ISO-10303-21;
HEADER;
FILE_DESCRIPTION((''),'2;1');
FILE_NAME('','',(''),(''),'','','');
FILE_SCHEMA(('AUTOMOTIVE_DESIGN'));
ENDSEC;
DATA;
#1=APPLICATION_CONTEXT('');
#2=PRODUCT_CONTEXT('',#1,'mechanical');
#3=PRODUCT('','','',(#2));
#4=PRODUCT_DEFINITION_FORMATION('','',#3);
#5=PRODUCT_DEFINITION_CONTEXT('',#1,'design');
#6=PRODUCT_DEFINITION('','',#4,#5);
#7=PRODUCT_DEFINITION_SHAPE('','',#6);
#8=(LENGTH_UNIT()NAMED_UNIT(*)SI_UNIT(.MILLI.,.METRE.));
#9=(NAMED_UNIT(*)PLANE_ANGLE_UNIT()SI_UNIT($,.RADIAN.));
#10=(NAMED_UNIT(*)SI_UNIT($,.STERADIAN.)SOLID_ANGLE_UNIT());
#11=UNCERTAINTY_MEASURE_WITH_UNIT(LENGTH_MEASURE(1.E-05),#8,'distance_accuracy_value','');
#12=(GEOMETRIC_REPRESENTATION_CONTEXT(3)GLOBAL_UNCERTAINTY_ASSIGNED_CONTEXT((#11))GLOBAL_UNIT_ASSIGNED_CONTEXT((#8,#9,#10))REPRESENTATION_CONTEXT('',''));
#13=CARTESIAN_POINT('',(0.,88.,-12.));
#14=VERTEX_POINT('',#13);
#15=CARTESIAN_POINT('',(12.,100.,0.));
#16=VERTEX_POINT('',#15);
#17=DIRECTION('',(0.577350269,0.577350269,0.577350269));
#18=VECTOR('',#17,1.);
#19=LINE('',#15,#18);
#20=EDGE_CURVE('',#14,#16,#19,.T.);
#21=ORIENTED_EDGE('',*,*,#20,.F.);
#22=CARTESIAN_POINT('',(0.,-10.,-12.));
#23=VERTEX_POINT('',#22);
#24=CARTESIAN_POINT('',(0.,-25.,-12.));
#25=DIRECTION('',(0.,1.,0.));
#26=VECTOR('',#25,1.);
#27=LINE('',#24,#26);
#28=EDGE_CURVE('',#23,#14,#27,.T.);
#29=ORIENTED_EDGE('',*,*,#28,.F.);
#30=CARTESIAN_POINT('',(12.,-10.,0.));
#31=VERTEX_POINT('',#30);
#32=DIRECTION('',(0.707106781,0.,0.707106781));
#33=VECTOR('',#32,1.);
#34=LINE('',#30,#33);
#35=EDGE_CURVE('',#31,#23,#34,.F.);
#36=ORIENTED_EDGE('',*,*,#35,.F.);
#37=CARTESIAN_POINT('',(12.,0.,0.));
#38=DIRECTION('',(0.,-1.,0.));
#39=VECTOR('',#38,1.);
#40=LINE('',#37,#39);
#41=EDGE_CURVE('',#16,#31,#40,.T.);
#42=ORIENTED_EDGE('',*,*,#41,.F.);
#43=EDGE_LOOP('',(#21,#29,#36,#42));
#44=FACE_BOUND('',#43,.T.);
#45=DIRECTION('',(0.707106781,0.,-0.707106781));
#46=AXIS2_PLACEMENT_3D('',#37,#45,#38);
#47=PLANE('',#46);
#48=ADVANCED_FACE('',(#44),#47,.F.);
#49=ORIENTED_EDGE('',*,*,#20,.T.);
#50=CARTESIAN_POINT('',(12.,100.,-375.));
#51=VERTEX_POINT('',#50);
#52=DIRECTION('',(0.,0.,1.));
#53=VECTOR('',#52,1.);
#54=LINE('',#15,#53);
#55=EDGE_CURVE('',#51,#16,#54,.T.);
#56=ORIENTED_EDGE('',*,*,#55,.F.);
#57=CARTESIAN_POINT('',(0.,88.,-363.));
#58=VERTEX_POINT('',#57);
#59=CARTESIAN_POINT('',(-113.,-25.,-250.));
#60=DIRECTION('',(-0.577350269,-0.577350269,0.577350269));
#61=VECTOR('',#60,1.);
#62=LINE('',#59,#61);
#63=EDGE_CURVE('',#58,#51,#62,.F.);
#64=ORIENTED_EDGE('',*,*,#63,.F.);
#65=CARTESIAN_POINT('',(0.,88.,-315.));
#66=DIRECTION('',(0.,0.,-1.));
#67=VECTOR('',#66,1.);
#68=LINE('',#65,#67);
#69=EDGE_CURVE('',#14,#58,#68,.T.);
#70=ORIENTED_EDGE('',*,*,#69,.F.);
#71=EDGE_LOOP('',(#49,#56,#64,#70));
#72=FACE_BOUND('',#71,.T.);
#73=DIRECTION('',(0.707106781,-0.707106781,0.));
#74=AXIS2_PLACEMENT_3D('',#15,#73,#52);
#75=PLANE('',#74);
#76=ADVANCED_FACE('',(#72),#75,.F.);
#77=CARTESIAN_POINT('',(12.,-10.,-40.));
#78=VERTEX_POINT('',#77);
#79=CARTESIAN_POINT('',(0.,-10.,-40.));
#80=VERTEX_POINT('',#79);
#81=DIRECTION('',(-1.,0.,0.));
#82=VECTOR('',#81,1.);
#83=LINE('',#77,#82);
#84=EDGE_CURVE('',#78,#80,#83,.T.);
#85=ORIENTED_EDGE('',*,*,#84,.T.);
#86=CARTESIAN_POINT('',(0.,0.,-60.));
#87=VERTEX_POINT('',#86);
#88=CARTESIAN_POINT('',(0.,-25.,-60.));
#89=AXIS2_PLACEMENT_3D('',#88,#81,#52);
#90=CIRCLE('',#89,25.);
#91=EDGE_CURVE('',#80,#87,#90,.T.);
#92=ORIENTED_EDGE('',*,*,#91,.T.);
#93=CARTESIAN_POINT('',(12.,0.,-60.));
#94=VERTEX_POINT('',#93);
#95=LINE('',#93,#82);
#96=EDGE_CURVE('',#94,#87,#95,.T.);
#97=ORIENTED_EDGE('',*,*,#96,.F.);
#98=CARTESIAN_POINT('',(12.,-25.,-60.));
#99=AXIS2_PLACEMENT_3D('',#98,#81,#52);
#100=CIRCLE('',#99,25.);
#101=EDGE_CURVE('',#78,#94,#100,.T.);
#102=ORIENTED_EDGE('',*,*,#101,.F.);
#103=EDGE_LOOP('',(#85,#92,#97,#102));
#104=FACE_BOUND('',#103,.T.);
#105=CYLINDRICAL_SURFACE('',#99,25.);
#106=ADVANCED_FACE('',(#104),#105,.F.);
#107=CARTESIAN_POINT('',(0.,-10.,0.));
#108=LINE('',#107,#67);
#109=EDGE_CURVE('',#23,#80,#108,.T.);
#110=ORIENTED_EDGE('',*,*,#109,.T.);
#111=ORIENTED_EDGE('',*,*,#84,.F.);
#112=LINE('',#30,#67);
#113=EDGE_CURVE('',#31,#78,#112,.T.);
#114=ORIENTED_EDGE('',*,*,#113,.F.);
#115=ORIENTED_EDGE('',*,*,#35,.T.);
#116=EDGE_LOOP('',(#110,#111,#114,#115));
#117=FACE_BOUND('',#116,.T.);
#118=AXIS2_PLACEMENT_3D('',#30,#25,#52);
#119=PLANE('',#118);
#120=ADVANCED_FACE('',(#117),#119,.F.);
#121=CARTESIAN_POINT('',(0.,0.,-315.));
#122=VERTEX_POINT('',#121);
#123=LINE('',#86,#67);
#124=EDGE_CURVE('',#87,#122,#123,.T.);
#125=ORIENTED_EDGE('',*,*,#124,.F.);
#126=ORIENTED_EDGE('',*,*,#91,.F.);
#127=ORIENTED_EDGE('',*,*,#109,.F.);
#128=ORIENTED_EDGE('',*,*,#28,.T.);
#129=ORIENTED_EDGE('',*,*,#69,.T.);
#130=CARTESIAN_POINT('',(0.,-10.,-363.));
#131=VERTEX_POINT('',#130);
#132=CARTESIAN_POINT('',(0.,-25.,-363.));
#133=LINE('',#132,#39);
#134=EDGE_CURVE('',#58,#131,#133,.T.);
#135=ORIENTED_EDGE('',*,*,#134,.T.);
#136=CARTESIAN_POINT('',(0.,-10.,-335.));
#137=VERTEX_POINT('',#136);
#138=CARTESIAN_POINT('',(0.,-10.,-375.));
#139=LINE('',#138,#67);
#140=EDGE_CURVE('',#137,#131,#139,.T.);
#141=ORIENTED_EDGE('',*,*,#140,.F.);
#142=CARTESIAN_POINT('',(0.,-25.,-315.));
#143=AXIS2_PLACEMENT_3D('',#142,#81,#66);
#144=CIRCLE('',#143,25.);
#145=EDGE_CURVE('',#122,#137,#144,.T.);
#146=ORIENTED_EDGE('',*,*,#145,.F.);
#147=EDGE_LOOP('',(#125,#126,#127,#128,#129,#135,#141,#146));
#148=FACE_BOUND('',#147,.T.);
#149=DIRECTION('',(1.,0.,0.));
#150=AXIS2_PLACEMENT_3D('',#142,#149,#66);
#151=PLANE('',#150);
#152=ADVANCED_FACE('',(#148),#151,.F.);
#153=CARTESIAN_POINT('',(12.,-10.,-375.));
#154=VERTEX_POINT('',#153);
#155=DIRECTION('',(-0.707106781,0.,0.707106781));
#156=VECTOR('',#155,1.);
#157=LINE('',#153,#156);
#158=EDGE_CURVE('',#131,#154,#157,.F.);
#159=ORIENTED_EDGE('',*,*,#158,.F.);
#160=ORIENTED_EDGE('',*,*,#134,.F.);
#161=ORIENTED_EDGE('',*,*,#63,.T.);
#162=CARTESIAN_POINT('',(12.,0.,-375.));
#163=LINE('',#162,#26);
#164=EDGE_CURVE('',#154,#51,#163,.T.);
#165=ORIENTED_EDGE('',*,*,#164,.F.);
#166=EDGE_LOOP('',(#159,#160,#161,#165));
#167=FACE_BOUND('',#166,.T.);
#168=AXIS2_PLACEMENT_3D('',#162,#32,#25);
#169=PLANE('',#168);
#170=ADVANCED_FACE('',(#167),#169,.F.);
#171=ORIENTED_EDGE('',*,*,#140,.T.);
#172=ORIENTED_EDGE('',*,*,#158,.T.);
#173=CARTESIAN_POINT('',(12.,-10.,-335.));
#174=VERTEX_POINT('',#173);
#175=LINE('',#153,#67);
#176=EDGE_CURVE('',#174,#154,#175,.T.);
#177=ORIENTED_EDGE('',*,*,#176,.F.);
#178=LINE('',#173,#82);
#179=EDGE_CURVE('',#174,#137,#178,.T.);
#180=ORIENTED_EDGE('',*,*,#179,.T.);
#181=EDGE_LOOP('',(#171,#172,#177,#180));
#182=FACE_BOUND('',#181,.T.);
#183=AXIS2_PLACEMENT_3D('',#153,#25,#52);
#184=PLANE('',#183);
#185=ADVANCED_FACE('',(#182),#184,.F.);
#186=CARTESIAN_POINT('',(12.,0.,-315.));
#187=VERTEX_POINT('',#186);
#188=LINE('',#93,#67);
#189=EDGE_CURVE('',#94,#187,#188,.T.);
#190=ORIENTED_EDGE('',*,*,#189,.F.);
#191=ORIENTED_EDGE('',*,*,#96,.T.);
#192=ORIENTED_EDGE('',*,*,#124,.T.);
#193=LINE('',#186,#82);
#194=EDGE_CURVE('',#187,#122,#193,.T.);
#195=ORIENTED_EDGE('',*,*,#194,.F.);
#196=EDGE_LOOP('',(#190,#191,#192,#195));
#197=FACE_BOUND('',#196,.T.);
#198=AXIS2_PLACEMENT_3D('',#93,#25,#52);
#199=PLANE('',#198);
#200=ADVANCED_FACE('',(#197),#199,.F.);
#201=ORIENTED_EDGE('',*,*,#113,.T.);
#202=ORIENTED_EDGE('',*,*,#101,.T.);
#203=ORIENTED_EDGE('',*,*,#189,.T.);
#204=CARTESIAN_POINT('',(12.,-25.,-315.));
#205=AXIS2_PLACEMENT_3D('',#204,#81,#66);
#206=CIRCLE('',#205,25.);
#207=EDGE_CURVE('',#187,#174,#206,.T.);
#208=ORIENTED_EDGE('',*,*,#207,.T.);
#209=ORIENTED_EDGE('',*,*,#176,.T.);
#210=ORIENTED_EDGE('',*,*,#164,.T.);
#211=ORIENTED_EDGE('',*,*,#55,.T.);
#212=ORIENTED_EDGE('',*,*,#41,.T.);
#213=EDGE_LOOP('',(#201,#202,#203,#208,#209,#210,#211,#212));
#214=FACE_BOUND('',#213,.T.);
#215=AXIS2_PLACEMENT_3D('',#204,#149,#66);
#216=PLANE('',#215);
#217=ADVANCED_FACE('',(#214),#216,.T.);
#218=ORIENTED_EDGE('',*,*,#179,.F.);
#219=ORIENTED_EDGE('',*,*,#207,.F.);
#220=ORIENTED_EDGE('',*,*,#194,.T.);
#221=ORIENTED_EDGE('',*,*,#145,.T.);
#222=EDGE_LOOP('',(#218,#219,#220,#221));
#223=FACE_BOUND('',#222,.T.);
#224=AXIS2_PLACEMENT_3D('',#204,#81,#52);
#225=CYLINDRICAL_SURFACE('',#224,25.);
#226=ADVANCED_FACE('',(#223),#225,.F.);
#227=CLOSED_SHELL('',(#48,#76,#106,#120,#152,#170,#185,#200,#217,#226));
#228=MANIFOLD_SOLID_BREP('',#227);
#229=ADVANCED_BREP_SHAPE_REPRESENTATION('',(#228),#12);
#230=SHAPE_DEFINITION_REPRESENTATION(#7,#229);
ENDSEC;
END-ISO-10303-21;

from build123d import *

# Parameters (mm, degrees)
BOSS_EXTRUDE1_DEPTH = 12
CHAMFER1_SIZE       = 12


with BuildPart() as part:
    # Sketch1 → Boss-Extrude1 (new body)
    with BuildSketch(Plane(origin=(0, 0, 0), x_dir=(0, 0, -1), z_dir=(1, 0, 0))):
        with BuildLine():
            Line((0, 0), (0, -10))
            Line((0, -10), (40, -10))
            ThreePointArc((40, -10), (48.819660113, -2.639320225), (60, 0))
            Line((60, 0), (315, 0))
            ThreePointArc((315, 0), (326.180339887, -2.639320225), (335, -10))
            Line((335, -10), (375, -10))
            Line((375, -10), (375, 0))
            Line((375, 0), (375, 100))
            Line((375, 100), (0, 100))
            Line((0, 100), (0, 0))
        make_face()
    extrude(amount=BOSS_EXTRUDE1_DEPTH)

    # Chamfer1
    chamfer1_edges = [part.edges().sort_by_distance(p)[0] for p in [
        (0, 45, -375),
        (0, 45, 0),
        (0, 100, -187.5),
    ]]
    chamfer(chamfer1_edges, length=CHAMFER1_SIZE - 0.0001)  # a hair under: the kernel refuses the full size


solid = part.part
